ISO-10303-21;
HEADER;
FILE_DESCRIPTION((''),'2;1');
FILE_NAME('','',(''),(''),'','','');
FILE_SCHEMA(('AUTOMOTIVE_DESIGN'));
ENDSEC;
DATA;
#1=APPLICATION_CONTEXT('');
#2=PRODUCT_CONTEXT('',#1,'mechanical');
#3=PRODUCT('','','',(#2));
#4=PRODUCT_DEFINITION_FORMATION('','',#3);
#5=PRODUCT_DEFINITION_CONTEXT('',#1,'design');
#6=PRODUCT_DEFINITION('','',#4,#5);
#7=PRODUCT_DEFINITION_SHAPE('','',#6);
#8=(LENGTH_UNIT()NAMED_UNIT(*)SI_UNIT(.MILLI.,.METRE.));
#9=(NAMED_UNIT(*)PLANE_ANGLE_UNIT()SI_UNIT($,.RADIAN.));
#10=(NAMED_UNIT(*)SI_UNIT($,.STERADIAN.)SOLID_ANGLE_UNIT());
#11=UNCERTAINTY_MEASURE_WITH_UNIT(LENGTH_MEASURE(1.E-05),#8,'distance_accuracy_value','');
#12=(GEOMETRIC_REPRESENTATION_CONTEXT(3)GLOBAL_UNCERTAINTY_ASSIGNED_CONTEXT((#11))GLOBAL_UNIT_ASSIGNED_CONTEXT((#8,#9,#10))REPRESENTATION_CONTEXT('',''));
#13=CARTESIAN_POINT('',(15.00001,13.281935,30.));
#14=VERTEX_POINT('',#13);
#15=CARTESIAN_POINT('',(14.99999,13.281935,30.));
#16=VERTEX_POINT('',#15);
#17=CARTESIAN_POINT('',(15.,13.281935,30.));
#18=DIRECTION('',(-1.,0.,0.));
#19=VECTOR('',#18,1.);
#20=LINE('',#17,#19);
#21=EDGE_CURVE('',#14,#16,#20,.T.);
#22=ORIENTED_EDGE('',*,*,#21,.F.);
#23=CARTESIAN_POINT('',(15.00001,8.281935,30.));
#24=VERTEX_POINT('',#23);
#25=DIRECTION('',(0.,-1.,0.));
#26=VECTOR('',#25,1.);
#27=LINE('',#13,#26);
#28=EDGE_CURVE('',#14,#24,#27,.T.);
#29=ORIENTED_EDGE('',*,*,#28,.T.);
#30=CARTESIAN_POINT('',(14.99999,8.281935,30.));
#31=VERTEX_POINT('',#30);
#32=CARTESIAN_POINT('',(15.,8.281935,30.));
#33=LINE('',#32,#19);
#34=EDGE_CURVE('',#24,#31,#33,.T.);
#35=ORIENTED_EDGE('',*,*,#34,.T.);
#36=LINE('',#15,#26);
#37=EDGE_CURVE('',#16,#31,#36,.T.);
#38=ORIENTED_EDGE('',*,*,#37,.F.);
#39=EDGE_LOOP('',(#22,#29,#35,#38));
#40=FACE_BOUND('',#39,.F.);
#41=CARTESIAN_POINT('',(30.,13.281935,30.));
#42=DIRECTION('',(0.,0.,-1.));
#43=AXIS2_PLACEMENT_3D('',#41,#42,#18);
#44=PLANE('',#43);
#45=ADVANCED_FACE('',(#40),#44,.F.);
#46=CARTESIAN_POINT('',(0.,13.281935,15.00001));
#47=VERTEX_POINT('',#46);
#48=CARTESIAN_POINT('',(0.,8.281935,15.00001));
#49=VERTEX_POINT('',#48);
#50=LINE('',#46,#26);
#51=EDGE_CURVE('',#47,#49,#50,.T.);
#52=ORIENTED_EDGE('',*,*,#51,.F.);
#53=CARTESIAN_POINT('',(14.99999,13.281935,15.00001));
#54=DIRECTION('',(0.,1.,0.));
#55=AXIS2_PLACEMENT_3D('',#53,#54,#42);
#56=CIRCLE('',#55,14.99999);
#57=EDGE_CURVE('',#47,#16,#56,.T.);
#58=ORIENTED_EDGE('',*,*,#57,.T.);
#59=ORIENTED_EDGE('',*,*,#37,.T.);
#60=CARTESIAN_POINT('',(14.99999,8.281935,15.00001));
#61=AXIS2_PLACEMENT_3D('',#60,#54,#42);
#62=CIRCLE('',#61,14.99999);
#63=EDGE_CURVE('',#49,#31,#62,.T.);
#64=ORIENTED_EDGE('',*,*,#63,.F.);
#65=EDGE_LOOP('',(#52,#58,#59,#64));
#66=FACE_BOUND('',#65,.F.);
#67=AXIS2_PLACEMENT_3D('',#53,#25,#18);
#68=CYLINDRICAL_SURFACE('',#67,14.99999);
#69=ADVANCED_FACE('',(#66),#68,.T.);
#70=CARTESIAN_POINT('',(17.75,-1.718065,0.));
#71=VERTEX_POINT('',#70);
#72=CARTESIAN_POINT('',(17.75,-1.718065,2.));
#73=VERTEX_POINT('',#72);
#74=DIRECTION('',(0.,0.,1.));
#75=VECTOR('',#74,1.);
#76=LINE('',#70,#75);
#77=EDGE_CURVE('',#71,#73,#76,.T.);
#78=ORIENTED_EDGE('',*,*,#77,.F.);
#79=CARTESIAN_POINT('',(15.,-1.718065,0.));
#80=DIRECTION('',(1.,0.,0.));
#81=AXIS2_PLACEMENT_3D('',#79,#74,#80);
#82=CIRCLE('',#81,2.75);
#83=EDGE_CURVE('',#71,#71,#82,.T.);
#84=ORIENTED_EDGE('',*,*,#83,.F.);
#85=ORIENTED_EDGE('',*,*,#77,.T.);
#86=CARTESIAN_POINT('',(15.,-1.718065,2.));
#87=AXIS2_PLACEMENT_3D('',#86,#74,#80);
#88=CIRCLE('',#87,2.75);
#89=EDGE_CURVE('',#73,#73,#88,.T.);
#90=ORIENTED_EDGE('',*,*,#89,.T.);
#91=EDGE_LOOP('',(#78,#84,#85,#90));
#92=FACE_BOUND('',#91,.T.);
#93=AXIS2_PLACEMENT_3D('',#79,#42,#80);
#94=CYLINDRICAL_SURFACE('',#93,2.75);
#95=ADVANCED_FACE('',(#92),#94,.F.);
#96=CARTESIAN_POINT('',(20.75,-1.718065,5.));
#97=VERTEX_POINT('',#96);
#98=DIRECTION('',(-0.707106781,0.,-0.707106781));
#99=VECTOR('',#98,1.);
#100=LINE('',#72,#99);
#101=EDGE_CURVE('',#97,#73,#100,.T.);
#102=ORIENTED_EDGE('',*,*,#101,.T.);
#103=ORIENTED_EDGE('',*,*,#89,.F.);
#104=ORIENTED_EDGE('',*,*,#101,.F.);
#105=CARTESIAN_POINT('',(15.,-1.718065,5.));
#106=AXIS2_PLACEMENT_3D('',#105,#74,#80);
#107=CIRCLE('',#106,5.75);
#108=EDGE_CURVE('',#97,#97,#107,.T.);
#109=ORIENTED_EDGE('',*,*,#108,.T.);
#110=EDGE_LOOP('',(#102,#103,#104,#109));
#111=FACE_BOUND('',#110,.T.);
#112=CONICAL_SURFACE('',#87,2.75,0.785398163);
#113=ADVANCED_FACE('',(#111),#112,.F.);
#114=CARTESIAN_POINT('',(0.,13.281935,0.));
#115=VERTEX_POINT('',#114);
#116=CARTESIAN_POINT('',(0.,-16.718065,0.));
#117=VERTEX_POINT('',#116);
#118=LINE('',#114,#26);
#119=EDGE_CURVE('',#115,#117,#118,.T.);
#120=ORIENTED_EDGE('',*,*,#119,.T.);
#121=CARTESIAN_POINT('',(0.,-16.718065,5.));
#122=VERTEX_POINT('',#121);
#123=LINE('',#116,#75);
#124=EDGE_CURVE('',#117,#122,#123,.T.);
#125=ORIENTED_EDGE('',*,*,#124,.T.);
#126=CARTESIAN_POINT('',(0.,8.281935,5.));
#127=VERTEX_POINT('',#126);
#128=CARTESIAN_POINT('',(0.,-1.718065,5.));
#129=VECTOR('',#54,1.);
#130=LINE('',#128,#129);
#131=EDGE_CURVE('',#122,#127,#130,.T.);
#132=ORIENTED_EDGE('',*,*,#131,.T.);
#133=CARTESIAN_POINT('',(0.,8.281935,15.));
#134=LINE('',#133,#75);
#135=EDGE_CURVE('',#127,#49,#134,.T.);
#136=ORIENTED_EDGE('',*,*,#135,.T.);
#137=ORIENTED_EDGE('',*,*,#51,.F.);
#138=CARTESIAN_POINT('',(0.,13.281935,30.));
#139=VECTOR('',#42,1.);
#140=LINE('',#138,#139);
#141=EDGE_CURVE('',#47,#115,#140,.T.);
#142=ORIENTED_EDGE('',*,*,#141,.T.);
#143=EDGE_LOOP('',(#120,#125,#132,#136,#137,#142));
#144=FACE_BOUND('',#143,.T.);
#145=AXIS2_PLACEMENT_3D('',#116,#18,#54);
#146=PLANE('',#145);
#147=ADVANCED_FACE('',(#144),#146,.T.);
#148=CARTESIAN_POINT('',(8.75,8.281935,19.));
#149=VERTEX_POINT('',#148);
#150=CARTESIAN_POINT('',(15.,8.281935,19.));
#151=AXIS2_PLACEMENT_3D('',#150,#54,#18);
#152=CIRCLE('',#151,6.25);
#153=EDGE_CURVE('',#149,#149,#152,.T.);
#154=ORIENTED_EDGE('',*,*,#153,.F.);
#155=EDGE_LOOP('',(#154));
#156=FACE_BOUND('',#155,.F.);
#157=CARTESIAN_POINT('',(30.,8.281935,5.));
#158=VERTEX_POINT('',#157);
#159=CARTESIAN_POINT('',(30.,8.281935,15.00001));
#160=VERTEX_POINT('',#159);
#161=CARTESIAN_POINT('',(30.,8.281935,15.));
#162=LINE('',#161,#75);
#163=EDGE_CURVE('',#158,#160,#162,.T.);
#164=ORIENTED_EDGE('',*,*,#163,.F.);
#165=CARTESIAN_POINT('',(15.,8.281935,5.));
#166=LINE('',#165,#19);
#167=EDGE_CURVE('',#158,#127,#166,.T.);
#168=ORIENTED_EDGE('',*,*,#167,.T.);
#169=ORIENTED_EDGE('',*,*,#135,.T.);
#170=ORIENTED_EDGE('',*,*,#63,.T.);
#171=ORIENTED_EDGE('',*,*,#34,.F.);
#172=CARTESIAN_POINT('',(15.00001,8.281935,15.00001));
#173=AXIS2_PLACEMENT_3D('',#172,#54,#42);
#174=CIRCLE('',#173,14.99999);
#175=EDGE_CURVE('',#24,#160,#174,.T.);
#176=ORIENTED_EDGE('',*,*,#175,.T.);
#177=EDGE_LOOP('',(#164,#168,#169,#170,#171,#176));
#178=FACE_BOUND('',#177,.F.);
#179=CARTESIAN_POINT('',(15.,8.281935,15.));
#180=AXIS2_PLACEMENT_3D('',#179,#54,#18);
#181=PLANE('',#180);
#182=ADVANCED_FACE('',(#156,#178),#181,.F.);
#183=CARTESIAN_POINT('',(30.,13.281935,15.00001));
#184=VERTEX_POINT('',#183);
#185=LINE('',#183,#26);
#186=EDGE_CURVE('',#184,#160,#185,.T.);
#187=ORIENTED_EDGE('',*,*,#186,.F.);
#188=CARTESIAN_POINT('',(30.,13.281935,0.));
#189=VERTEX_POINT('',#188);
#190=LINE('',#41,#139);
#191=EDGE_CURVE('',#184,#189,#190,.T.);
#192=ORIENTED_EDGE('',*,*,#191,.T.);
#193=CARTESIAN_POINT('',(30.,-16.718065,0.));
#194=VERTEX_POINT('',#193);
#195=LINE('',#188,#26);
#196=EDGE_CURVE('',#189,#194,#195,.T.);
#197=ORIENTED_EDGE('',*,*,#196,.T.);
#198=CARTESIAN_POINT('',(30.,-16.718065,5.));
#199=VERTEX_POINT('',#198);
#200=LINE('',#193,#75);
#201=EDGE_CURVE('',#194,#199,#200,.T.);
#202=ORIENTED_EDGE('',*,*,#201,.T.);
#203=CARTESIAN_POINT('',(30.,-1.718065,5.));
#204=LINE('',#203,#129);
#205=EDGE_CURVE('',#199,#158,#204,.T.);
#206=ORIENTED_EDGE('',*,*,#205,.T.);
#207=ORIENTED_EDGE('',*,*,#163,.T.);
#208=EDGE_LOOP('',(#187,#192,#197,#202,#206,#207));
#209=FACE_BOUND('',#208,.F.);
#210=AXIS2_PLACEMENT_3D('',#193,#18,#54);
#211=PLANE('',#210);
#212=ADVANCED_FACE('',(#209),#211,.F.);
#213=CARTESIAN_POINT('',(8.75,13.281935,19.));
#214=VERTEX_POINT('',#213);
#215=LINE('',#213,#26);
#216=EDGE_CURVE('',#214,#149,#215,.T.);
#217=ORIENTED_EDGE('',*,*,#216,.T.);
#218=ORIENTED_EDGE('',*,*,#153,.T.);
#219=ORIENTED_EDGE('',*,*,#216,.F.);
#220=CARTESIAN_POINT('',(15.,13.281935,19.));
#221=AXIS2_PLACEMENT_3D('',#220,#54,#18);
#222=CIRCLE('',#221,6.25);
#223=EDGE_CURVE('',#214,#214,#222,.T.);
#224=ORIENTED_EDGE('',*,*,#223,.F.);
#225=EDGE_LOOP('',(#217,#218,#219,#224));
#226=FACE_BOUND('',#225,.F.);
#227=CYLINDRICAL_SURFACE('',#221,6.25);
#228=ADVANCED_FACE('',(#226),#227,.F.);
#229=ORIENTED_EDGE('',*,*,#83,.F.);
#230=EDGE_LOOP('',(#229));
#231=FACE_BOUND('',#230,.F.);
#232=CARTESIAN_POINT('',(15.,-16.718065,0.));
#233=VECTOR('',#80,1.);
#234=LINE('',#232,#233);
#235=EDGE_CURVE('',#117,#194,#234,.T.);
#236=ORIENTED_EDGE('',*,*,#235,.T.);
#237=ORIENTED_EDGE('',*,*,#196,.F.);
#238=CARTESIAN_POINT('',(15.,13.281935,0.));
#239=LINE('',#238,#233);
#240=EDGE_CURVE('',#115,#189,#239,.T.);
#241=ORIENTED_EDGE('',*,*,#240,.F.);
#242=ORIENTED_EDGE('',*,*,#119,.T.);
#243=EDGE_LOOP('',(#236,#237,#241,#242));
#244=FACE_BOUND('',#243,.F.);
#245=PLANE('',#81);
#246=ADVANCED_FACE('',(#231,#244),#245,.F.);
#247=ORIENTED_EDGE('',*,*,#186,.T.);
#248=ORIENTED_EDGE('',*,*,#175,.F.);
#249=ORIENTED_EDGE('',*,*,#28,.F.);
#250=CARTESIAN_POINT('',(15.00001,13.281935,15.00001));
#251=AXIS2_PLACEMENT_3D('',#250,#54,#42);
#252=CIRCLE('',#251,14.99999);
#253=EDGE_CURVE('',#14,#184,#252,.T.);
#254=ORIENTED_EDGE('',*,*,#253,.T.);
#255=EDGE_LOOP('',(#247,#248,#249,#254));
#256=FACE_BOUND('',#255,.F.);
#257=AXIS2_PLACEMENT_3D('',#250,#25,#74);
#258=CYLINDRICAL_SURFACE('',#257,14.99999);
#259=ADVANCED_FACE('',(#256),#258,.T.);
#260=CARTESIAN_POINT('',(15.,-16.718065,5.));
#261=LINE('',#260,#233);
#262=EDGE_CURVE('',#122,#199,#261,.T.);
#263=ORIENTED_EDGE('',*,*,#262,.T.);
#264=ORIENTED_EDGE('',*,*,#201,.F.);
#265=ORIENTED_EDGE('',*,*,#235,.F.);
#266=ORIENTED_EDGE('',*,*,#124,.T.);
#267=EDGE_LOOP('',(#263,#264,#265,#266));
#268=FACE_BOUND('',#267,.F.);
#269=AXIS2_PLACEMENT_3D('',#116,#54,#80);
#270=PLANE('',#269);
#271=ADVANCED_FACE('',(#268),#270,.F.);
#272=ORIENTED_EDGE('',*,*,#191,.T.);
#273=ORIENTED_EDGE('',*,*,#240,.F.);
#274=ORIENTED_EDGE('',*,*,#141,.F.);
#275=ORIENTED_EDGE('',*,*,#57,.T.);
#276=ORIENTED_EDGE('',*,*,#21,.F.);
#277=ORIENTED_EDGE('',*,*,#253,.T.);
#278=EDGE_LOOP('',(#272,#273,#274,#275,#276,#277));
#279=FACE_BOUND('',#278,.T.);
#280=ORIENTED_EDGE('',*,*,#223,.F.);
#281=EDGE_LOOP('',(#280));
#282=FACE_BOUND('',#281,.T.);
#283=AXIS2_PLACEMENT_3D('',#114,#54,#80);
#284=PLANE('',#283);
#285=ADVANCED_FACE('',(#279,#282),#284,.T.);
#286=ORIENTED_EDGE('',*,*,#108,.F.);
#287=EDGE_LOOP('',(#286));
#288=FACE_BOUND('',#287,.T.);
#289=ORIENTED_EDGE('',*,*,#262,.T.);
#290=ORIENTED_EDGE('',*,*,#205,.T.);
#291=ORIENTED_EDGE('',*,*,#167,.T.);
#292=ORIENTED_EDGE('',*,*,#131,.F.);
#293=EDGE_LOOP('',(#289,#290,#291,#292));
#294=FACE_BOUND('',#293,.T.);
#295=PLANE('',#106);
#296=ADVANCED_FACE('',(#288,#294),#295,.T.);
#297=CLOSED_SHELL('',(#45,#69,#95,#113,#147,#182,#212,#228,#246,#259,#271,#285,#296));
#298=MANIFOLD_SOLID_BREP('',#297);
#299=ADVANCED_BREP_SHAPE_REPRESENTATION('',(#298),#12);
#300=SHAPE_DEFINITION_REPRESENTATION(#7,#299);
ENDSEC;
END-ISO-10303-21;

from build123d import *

# Parameters (mm, degrees)
F0_W     = 30
F0_H     = 30
F0_R     = 2.75
F1_DEPTH = 5
F2_W     = 30
F2_H     = 30
F3_DEPTH = 5
F4_R     = 6.25
F5_DEPTH = 6
F6_R     = 14.99999
F7_SIZE  = 3


# Not quite as in the source:
# - a fillet or chamfer is up to 0.001 mm smaller than in the source, because OpenCascade refuses the exact size


with BuildPart() as f1:
    # F0 (on Top) → F1 (new body)
    with BuildSketch(Plane.XY):
        with Locations((15, -1.7180653661)):
            Rectangle(F0_W, F0_H)
        with Locations((15, -1.7180653661)):
            Circle(F0_R, mode=Mode.SUBTRACT)
    extrude(amount=F1_DEPTH)

    # F2 (on face) → F3 (join)
    with BuildSketch(Plane(origin=(0, 13.2819346339, 0), x_dir=(-1, 0, 0), z_dir=(0, 1, 0))):
        with Locations((-15, 15)):
            Rectangle(F2_W, F2_H)
    extrude(amount=-F3_DEPTH)

    # F4 (on face) → F5 (cut)
    with BuildSketch(Plane(origin=(0, 13.2819346339, 0), x_dir=(-1, 0, 0), z_dir=(0, 1, 0))):
        with Locations((-15, 19)):
            Circle(F4_R)
    extrude(amount=-F5_DEPTH, mode=Mode.SUBTRACT)

    # F6 (radius 15 in the source; OpenCascade refuses exactly that, so slightly less here)
    f6_edges = [f1.edges().sort_by_distance(p)[0] for p in [
        (30, 10.781935, 30),
        (0, 10.781935, 30),
    ]]
    fillet(f6_edges, radius=F6_R)

    # F7
    f7_edges = [f1.edges().sort_by_distance(p)[0] for p in [
        (12.25, -1.718065, 5),
    ]]
    chamfer(f7_edges, length=F7_SIZE)


solid = f1.part
